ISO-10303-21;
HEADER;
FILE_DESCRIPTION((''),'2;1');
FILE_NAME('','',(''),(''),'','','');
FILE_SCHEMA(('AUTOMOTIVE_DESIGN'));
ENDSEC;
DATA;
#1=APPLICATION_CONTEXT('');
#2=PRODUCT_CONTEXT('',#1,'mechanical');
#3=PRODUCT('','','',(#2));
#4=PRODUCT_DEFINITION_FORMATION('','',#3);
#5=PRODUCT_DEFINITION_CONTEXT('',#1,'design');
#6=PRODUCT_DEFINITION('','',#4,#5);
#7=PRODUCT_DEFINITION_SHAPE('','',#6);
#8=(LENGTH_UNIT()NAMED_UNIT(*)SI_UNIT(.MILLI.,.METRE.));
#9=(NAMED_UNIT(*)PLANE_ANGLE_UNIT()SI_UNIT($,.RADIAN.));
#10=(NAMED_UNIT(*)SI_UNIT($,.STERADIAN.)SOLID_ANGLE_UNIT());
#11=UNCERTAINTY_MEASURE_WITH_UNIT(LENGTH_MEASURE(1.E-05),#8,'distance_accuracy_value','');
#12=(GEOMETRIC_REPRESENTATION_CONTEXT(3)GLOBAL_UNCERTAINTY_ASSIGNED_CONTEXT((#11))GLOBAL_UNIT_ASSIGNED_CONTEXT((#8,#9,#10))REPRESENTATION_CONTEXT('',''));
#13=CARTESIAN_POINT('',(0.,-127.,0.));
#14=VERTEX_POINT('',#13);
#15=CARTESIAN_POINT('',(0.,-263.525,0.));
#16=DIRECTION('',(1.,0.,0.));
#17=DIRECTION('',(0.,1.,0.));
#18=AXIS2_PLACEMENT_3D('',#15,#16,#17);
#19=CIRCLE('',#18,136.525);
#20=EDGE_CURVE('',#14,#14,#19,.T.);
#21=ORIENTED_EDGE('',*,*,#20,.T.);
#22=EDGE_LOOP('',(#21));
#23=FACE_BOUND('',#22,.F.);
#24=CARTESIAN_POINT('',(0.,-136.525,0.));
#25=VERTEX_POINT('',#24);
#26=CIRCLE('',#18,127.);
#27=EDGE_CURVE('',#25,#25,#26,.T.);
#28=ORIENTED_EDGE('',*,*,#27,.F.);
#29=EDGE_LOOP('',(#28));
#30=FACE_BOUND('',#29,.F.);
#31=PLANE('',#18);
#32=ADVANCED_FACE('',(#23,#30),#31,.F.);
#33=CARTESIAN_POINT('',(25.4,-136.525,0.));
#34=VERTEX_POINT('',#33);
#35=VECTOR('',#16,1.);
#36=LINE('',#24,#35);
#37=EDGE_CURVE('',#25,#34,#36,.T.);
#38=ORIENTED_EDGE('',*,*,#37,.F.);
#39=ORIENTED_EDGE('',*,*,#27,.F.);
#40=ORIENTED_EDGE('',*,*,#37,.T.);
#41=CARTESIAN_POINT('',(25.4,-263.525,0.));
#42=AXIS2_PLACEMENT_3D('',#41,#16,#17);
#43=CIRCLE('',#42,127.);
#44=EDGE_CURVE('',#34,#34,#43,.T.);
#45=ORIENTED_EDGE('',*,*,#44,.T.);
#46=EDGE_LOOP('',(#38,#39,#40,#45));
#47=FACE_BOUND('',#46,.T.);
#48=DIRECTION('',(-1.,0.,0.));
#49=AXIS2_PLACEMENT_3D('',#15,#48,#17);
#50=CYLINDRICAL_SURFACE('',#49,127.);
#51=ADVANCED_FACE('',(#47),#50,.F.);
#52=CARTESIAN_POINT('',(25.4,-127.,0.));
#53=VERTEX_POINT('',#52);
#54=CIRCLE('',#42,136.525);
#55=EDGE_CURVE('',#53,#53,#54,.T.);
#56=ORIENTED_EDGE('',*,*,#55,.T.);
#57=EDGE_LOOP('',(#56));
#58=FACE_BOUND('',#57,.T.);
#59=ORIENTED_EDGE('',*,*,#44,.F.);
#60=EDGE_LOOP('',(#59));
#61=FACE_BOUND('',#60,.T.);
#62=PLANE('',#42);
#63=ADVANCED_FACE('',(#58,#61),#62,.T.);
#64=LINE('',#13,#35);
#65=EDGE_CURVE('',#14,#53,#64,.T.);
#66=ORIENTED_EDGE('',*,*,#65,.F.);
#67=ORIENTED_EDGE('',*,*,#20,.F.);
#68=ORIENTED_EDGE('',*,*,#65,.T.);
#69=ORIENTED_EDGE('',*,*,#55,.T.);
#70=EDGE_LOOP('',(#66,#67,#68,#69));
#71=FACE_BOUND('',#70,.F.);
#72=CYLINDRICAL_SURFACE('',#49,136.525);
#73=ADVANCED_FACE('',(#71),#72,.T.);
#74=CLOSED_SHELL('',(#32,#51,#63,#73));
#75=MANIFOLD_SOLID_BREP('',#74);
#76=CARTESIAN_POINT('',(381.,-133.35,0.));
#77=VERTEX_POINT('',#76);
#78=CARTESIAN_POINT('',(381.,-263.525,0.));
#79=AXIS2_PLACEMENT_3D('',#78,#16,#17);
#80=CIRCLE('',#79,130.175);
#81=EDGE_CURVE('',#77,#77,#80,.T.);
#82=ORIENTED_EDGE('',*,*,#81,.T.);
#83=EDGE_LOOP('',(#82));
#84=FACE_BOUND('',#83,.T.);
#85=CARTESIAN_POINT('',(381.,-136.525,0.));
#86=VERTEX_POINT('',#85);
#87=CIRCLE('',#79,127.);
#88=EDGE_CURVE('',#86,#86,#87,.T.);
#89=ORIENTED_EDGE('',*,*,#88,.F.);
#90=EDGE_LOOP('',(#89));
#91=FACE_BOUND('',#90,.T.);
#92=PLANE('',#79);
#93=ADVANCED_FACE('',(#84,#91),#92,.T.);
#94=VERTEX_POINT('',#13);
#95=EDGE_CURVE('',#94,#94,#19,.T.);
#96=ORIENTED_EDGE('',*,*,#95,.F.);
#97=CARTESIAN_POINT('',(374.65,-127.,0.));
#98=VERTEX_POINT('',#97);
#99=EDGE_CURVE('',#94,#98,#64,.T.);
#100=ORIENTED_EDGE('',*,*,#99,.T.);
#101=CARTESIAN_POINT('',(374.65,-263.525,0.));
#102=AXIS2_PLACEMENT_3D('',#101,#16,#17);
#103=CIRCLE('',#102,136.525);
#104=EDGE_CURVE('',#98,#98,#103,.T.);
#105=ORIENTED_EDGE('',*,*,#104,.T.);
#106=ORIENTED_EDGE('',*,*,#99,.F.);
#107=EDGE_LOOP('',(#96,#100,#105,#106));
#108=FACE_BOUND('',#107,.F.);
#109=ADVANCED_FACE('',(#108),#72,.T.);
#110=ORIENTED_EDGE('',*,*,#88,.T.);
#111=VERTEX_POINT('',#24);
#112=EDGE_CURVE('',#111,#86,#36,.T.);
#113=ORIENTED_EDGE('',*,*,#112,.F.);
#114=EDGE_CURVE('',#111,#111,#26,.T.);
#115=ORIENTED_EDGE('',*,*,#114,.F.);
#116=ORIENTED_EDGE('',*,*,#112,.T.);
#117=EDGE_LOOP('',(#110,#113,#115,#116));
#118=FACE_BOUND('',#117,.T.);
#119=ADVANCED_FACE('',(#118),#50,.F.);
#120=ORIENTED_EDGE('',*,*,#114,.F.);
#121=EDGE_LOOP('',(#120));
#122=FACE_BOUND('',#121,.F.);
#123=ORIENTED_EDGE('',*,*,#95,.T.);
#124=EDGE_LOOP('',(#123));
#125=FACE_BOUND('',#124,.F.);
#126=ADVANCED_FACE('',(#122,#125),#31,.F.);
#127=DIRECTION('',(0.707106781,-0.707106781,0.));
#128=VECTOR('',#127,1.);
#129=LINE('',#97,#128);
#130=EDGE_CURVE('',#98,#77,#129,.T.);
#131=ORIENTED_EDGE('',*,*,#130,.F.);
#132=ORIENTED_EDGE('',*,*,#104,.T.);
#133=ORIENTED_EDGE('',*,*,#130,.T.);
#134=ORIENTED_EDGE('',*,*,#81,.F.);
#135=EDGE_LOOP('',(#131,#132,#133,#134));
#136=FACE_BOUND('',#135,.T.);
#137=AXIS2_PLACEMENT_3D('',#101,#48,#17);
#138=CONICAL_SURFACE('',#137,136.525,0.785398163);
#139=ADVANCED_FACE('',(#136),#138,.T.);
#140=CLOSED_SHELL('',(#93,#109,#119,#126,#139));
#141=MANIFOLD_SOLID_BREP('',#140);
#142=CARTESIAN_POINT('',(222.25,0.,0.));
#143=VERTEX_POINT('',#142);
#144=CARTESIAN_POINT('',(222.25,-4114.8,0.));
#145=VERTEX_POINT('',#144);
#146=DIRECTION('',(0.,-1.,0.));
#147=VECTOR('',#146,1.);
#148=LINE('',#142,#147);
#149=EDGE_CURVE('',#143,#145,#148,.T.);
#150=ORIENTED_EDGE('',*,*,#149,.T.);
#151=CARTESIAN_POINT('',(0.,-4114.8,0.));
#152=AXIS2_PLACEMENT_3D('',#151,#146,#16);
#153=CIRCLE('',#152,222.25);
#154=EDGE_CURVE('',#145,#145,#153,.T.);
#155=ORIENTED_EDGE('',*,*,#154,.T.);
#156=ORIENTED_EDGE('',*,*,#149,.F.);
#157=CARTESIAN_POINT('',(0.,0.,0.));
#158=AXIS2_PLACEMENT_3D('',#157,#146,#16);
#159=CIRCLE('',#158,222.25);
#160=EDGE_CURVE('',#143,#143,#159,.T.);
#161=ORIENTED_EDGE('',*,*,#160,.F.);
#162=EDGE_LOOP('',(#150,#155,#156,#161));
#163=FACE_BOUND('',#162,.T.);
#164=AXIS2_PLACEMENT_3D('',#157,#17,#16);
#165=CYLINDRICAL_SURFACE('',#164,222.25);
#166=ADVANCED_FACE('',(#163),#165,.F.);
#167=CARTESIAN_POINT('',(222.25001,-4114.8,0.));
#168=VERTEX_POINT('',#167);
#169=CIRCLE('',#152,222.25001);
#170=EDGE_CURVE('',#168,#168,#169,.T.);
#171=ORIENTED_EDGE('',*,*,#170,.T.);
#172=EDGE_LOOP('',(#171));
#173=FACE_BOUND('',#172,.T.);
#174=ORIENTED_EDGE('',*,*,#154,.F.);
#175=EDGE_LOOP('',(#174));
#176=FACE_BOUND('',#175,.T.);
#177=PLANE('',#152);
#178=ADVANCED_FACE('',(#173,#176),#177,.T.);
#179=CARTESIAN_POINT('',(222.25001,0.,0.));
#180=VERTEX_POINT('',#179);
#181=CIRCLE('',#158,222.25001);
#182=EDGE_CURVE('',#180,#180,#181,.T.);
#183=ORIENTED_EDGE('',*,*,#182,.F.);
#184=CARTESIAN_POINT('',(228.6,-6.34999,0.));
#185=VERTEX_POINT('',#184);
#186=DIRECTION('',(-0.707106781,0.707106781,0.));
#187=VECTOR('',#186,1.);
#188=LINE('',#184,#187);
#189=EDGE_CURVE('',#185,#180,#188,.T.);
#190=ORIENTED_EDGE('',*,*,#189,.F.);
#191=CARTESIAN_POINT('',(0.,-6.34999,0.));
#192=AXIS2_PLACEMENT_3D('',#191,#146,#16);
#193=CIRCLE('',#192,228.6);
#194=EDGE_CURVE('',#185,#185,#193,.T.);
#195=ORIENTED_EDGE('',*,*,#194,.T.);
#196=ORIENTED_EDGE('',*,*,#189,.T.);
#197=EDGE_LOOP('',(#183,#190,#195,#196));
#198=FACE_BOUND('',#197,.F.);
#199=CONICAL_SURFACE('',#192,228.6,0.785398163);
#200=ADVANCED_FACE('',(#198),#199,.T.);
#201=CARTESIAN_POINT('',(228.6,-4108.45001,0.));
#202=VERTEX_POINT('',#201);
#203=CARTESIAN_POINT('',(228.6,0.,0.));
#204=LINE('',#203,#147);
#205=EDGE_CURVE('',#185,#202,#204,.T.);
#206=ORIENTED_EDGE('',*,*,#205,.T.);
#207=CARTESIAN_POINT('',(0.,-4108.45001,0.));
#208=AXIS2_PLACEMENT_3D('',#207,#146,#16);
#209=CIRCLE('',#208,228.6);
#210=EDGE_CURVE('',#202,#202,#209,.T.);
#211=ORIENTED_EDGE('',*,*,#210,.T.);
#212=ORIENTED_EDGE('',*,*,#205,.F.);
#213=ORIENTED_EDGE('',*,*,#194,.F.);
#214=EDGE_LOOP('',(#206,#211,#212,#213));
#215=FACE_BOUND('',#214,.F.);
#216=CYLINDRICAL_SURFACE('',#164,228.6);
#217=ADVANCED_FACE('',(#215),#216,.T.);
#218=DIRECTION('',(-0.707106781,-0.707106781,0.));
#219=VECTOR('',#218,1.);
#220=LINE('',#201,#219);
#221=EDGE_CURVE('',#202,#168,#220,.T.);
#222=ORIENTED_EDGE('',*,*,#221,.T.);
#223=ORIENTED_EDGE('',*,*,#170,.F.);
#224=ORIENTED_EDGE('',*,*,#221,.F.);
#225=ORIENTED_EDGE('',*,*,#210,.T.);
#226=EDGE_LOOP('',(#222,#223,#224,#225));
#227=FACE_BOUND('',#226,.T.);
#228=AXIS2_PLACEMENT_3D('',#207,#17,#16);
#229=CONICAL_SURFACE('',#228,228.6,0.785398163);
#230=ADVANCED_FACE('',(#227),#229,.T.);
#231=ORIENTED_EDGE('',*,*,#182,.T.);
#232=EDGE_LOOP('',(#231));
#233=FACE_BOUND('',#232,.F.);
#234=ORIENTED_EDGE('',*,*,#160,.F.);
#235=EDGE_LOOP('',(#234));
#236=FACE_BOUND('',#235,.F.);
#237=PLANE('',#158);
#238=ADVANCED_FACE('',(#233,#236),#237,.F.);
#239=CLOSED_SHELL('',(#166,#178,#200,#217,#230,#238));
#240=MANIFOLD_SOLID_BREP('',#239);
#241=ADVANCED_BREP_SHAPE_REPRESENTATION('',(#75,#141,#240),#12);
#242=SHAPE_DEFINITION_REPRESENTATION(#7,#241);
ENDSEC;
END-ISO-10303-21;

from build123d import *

# Parameters (mm, degrees)
F0_R     = 228.6
F0_R_2   = 222.25
F1_DEPTH = 4114.8
F2_SIZE  = 6.34999
F3_R     = 136.525
F3_R_2   = 127
F4_DEPTH = 25.4
F5_DEPTH = 381
F6_SIZE  = 6.35
F7_SIZE  = 6.34999


# Not quite as in the source:
# - a fillet or chamfer is up to 0.001 mm smaller than in the source, because OpenCascade refuses the exact size


with BuildPart() as f1:
    # F0 (on Front) → F1 (new body)
    with BuildSketch(Plane.XZ):
        Circle(F0_R)
        Circle(F0_R_2, mode=Mode.SUBTRACT)
    extrude(amount=F1_DEPTH)

    # F2 (size 6.35 in the source; OpenCascade refuses exactly that, so slightly less here)
    f2_edges = [f1.edges().sort_by_distance(p)[0] for p in [
        (-228.6, -4114.8, 0),
    ]]
    chamfer(f2_edges, length=F2_SIZE)

    # F7 (size 6.35 in the source; OpenCascade refuses exactly that, so slightly less here)
    f7_edges = [f1.edges().sort_by_distance(p)[0] for p in [
        (-228.6, 0, 0),
    ]]
    chamfer(f7_edges, length=F7_SIZE)


with BuildPart() as f4:
    # F3 (on Right) → F4 (new body)
    with BuildSketch(Plane.YZ):
        with Locations((-263.525, 0)):
            Circle(F3_R)
        with Locations((-263.525, 0)):
            Circle(F3_R_2, mode=Mode.SUBTRACT)
    extrude(amount=F4_DEPTH)


with BuildPart() as f5:
    # F3 (on Right) → F5 (new body)
    with BuildSketch(Plane.YZ):
        with Locations((-263.525, 0)):
            Circle(F3_R)
        with Locations((-263.525, 0)):
            Circle(F3_R_2, mode=Mode.SUBTRACT)
    extrude(amount=F5_DEPTH)

    # F6
    f6_edges = [f5.edges().sort_by_distance(p)[0] for p in [
        (381, -400.05, 0),
    ]]
    chamfer(f6_edges, length=F6_SIZE)


solid = Compound([f1.part, f4.part, f5.part])
